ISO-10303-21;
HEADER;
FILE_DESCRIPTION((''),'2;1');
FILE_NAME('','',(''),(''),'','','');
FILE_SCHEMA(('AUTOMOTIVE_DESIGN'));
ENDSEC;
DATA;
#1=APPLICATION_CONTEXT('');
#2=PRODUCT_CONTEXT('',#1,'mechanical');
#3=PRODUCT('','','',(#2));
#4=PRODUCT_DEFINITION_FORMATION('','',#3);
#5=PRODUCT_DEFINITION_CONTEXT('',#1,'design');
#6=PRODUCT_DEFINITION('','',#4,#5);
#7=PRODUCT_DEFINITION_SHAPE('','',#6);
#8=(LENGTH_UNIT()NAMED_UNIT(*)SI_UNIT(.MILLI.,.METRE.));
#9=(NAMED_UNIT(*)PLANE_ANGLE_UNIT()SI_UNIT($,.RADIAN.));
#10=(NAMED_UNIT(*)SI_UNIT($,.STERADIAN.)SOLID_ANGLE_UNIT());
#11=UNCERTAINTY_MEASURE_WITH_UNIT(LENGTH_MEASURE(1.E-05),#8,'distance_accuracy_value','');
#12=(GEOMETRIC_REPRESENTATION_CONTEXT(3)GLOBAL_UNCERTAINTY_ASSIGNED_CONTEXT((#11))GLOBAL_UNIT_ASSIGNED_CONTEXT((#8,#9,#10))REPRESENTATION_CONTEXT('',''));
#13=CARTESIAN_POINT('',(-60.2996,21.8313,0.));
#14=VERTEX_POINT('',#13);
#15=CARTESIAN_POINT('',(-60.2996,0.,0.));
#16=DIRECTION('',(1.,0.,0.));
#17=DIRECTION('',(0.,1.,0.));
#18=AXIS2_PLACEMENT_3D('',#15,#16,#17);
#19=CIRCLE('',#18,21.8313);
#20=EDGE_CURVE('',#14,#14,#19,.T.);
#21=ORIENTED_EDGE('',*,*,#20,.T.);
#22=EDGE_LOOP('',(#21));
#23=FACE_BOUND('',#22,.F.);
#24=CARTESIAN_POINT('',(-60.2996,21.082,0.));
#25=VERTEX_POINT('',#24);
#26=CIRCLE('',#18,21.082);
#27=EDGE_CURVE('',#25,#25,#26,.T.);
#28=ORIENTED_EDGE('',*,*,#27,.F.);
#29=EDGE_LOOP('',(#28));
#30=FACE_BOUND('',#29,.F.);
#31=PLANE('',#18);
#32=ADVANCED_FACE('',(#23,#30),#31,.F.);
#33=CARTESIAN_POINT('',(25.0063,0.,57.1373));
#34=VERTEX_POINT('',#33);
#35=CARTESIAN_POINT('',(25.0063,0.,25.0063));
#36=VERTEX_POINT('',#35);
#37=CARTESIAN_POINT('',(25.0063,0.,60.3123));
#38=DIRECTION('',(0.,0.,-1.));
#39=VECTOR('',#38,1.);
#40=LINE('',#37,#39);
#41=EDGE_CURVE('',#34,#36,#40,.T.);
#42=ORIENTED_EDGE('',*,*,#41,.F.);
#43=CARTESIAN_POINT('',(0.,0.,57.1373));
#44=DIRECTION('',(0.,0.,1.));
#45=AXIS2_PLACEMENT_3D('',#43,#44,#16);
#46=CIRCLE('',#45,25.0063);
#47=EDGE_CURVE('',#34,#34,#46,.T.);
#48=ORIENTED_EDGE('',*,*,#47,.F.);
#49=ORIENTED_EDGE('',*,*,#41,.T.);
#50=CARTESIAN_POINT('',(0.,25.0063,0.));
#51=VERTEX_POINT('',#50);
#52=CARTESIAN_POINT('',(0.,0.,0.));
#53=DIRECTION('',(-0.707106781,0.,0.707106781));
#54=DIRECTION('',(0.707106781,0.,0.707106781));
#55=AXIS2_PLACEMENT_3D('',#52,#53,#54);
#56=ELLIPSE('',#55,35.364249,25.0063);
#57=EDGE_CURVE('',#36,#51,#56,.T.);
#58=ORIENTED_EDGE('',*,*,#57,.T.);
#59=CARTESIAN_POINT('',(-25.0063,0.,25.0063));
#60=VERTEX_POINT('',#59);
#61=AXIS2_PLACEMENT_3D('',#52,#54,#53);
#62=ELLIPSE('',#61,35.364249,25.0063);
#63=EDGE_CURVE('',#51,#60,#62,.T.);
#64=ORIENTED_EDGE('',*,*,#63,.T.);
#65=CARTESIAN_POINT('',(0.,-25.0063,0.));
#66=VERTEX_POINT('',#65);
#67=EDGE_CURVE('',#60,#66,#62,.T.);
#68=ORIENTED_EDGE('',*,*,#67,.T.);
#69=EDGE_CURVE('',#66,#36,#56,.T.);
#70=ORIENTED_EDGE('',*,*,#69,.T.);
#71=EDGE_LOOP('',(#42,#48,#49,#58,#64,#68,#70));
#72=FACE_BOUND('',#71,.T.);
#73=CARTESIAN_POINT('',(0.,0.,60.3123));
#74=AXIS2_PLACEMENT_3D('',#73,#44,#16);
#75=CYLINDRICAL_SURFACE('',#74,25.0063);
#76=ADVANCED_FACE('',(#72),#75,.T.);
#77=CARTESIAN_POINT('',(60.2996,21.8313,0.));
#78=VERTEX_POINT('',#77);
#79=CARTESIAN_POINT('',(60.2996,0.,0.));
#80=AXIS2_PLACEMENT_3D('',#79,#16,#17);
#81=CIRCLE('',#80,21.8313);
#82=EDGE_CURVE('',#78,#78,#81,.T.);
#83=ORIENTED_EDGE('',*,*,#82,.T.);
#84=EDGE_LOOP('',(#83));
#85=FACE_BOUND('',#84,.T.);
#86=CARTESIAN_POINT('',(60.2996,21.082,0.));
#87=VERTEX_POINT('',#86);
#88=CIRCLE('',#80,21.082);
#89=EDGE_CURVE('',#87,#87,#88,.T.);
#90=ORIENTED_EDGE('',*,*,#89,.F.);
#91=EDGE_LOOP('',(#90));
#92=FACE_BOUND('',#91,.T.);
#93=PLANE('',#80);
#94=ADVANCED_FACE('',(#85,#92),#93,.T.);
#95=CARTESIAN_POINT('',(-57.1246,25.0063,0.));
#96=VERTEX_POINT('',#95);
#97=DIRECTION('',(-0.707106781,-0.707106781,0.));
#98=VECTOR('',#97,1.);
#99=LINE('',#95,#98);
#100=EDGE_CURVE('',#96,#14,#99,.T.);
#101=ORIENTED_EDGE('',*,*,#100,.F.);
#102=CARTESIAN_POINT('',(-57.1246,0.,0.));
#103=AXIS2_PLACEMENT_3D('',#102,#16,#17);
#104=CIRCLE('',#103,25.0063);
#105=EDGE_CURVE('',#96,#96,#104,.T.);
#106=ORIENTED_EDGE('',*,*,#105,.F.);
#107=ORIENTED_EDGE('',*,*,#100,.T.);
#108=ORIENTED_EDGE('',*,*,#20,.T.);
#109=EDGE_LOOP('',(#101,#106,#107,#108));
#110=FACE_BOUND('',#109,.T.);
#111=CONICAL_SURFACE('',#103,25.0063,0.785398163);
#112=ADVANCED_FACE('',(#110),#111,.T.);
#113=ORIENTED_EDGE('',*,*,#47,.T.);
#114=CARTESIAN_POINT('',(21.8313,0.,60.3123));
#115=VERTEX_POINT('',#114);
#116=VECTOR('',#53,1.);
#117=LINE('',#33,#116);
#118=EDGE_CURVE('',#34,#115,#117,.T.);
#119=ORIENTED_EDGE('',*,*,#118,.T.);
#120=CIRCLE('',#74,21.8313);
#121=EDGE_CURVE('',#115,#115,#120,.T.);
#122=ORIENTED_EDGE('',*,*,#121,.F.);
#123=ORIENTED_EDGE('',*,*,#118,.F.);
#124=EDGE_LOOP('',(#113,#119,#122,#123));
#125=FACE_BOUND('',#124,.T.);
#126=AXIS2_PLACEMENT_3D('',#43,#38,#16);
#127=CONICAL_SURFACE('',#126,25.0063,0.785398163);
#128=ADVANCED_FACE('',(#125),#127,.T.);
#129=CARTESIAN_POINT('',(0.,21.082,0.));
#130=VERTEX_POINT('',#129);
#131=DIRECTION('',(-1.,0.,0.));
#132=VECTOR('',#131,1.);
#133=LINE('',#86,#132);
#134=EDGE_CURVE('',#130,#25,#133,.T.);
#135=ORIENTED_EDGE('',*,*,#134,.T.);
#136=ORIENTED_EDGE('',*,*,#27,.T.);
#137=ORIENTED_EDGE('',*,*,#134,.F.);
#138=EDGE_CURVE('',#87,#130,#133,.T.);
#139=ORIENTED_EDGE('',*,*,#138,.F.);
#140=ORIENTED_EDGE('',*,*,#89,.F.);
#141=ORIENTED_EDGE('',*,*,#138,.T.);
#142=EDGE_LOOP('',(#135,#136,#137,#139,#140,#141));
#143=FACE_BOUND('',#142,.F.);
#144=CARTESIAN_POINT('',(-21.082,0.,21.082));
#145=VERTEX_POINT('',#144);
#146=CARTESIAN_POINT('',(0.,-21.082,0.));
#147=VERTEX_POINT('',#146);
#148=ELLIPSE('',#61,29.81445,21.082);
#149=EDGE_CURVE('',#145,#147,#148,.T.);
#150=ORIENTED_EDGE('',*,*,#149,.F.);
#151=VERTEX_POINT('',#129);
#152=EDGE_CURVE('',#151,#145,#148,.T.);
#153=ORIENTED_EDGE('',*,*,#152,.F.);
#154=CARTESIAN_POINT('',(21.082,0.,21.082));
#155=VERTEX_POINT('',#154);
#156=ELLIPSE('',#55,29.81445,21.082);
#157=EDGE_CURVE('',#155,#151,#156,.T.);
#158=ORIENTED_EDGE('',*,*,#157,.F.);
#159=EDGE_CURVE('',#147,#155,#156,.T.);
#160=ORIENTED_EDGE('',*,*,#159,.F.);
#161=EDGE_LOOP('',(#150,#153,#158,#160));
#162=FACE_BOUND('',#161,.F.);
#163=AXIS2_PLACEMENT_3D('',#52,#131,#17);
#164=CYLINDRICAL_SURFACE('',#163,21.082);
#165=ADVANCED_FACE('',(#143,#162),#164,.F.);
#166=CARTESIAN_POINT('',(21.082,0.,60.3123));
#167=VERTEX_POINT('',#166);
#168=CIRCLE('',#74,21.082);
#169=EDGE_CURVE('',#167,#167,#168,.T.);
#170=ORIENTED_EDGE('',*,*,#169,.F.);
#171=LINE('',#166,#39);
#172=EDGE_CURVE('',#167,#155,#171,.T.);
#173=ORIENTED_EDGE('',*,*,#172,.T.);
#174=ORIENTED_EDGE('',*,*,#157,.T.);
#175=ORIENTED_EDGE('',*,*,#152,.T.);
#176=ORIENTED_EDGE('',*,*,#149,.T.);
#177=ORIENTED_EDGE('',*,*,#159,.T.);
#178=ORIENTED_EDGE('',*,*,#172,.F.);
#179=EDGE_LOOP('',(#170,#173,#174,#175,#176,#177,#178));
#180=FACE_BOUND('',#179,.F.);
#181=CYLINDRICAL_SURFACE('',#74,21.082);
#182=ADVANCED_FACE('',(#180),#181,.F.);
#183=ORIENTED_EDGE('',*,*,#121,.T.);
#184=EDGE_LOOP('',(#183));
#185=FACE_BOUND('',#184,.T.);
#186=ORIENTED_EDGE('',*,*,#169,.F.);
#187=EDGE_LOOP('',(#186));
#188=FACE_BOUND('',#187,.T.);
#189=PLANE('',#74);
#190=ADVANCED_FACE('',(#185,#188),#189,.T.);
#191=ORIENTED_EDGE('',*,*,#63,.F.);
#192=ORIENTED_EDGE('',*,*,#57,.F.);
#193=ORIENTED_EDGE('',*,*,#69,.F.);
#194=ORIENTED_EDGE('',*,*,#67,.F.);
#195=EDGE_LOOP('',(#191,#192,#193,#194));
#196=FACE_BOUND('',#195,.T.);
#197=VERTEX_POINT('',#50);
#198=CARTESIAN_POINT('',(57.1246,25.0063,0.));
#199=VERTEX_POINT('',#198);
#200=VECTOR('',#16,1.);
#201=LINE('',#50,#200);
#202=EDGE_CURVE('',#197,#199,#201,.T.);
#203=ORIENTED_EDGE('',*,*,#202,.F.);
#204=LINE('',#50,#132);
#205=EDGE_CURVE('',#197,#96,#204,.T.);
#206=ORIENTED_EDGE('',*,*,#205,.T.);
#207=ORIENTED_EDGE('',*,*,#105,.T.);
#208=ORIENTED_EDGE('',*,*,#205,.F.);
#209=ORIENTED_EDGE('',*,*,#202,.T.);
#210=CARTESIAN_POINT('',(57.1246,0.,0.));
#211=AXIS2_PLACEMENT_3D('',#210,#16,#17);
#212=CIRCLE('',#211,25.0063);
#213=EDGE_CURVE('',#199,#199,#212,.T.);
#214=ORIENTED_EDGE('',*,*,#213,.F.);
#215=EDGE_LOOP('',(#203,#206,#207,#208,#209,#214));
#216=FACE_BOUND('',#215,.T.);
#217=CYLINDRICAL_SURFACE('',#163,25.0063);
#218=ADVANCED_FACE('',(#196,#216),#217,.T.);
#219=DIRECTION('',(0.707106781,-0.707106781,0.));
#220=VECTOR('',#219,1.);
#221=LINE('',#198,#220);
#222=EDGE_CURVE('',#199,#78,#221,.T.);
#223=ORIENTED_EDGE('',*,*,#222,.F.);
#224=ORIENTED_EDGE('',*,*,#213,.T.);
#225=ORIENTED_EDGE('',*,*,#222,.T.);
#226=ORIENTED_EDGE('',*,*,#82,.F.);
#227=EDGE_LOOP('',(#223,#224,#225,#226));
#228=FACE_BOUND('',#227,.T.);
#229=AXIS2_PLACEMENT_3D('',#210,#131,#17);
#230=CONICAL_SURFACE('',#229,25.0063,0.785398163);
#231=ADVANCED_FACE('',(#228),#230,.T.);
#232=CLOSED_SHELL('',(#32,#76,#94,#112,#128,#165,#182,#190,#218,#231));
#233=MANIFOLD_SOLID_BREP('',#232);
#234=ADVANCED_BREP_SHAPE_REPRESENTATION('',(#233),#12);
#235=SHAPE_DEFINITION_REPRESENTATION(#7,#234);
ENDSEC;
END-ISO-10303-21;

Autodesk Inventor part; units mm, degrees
ref_plane "YZ Plane" through (0, 0, 0) normal (1, 0, 0) x (0, 1, 0)
ref_plane "XZ Plane" through (0, 0, 0) normal (0, 1, 0) x (-1, 0, 0)
sketch "Sketch1" plane through (0, 0, 0) normal (1, 0, 0) x (0, 1, 0)
  circle A0 centre (0, 0) radius 21.082
  circle A1 centre (0, 0) radius 25.0063
  dimension "d0" = 42.164
  dimension "d1" = 50.0126
extrude "Extrusion1" add sketch "Sketch1" along normal mid plane 120.5992
ref_plane "Work Plane1" through (0, 0, 60.3123) normal (0, 0, 1) x (1, 0, 0)
sketch "Sketch2" plane through (0, 0, 60.3123) normal (0, 0, 1) x (1, 0, 0)
  circle A0 centre (0, 0) radius 25.0063
  circle A1 centre (0, 0) radius 21.082
  dimension "d5" = 50.0126
  dimension "d6" = 42.164
extrude "Extrusion2" add sketch "Sketch2" against normal up to next
sketch "Sketch3" plane through (0, 0, 60.3123) normal (0, 0, 1) x (1, 0, 0)
  circle A0 centre (0, 0) radius 21.082 projected
extrude "Extrusion3" cut sketch "Sketch3" against normal up to next
chamfer "Chamfer1" distance 3.175 angle 45 3 edges at (-60.2996, -25.0063, 0) (-25.0063, 0, 60.3123) (60.2996, -25.0063, 0)
properties part number "Tee 1.25 IN D" material "PVC-Piping"
